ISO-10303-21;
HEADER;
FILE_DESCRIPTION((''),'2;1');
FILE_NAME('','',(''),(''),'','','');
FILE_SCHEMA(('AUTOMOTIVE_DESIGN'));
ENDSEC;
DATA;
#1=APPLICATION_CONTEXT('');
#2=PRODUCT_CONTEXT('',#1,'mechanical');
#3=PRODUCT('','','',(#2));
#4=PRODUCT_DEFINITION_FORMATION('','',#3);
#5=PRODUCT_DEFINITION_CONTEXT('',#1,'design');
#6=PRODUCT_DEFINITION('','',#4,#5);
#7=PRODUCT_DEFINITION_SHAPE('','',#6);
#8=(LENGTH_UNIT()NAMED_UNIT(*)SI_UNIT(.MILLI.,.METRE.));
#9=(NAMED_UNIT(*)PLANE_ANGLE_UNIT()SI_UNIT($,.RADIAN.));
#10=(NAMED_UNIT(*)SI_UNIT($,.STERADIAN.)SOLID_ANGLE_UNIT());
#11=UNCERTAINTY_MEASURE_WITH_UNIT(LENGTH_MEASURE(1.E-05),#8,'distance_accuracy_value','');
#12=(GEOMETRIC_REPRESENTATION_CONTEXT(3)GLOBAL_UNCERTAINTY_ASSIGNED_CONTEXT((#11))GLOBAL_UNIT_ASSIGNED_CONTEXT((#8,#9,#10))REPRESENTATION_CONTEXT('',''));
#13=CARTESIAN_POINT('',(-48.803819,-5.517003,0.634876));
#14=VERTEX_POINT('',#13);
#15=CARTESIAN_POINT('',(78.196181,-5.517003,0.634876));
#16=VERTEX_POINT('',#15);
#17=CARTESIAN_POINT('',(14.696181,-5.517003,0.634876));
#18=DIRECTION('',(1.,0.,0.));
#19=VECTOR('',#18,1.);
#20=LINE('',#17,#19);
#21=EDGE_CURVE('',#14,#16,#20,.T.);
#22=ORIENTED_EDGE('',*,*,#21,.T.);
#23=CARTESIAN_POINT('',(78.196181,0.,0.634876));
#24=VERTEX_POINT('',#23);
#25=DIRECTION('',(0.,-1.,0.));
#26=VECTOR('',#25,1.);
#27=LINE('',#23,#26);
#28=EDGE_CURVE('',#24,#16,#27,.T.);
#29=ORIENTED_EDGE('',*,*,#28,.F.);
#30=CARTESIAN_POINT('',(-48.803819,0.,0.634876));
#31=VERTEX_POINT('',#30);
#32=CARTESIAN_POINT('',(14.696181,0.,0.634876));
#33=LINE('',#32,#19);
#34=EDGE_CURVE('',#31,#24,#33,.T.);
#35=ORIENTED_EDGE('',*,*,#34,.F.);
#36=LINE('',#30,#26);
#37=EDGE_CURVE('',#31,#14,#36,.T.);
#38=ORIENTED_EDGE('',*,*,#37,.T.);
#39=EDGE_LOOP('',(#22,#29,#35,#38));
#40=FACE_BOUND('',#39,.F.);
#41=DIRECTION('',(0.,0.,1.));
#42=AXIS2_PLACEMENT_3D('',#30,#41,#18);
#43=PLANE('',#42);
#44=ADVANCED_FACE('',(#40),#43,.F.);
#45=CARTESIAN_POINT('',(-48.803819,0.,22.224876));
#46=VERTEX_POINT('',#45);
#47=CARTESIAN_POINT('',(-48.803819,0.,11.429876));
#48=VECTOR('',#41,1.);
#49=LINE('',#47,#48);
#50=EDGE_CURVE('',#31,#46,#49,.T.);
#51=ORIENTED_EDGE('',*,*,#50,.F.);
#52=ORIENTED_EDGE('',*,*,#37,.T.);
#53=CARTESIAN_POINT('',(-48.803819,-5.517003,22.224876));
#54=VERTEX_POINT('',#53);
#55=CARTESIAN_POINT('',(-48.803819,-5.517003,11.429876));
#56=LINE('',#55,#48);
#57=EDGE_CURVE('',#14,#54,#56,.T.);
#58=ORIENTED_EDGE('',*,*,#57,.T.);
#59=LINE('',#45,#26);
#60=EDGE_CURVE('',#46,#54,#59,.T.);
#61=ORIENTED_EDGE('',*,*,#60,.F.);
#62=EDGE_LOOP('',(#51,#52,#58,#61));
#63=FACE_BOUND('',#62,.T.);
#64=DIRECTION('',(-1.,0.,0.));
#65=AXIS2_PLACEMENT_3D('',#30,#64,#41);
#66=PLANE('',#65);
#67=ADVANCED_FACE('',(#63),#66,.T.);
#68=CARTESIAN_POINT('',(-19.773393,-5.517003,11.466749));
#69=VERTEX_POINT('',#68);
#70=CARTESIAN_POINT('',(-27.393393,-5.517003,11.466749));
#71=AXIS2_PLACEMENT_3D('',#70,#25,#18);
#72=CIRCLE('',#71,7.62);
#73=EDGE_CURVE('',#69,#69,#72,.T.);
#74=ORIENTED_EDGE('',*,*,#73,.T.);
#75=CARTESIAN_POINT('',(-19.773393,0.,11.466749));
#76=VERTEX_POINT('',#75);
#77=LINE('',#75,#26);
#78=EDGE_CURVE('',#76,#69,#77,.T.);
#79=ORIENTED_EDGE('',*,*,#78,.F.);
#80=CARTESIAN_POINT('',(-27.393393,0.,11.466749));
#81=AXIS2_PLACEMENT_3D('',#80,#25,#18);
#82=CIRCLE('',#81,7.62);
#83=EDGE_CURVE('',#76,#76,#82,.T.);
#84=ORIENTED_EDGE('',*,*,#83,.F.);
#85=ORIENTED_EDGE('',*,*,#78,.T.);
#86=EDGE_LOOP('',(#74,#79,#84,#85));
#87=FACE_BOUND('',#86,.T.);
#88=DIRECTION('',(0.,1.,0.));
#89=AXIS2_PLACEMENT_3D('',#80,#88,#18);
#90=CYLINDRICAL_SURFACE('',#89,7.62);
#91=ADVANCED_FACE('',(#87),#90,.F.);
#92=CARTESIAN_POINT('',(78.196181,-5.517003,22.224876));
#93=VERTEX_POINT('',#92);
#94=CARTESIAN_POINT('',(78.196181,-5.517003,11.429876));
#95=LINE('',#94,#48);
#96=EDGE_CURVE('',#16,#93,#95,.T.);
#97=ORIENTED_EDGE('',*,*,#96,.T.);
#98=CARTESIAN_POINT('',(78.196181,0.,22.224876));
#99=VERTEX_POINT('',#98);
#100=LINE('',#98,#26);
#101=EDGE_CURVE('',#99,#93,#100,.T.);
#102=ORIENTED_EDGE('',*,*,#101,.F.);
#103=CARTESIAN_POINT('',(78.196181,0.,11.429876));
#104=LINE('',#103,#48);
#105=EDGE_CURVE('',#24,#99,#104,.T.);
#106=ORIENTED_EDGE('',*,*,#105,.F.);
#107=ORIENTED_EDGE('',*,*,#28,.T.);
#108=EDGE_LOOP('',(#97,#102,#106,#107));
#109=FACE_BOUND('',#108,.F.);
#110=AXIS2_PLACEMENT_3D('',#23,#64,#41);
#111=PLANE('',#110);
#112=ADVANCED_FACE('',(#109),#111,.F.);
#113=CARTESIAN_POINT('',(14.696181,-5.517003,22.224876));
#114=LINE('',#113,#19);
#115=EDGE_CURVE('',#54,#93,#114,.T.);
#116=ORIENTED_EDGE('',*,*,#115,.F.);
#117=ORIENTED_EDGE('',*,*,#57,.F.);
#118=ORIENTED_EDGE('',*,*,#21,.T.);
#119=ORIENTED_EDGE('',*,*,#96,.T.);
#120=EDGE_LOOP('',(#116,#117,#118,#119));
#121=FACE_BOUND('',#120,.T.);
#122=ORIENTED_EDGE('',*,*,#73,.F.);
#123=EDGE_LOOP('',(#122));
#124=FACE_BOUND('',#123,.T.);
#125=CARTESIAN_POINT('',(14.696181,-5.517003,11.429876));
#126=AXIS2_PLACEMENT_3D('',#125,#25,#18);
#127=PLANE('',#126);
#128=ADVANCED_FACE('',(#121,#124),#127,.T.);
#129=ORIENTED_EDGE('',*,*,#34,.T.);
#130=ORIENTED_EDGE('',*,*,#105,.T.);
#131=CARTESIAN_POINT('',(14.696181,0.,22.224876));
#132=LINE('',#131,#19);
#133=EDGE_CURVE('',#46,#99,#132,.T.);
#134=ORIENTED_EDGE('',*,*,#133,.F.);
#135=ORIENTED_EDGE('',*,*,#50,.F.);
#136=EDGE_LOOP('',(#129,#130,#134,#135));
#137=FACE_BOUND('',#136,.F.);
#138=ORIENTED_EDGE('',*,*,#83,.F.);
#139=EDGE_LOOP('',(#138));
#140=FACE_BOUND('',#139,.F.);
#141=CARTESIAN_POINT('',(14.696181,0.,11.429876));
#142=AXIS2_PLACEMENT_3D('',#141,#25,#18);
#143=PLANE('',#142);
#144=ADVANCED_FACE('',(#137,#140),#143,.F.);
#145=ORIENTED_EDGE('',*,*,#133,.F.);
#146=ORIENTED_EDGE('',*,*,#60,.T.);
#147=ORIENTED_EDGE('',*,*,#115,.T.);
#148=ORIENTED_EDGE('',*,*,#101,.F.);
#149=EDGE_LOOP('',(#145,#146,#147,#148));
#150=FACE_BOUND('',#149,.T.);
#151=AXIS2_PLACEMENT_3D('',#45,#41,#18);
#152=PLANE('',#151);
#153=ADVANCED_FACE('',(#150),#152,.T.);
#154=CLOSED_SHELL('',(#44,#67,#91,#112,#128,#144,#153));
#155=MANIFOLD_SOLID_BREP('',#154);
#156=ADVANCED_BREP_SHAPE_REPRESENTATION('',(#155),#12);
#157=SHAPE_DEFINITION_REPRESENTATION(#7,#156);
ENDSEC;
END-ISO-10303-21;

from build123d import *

# Parameters (mm, degrees)
F0_W     = 127
F0_H     = 21.59
F0_R     = 7.62
F1_DEPTH = 5.5170031264


# Not quite as in the source:
# - the program builds the solid bodies; features that only make, move or delete a surface that nothing else refers to are left out


with BuildPart() as f1:
    # F0 (on Front) → F1 (new body)
    with BuildSketch(Plane.XZ):
        with Locations((14.6961806784, 11.4298760891)):
            Rectangle(F0_W, F0_H)
        with Locations((-27.3933932185, 11.4667490125)):
            Circle(F0_R, mode=Mode.SUBTRACT)
    extrude(amount=F1_DEPTH)


solid = f1.part
